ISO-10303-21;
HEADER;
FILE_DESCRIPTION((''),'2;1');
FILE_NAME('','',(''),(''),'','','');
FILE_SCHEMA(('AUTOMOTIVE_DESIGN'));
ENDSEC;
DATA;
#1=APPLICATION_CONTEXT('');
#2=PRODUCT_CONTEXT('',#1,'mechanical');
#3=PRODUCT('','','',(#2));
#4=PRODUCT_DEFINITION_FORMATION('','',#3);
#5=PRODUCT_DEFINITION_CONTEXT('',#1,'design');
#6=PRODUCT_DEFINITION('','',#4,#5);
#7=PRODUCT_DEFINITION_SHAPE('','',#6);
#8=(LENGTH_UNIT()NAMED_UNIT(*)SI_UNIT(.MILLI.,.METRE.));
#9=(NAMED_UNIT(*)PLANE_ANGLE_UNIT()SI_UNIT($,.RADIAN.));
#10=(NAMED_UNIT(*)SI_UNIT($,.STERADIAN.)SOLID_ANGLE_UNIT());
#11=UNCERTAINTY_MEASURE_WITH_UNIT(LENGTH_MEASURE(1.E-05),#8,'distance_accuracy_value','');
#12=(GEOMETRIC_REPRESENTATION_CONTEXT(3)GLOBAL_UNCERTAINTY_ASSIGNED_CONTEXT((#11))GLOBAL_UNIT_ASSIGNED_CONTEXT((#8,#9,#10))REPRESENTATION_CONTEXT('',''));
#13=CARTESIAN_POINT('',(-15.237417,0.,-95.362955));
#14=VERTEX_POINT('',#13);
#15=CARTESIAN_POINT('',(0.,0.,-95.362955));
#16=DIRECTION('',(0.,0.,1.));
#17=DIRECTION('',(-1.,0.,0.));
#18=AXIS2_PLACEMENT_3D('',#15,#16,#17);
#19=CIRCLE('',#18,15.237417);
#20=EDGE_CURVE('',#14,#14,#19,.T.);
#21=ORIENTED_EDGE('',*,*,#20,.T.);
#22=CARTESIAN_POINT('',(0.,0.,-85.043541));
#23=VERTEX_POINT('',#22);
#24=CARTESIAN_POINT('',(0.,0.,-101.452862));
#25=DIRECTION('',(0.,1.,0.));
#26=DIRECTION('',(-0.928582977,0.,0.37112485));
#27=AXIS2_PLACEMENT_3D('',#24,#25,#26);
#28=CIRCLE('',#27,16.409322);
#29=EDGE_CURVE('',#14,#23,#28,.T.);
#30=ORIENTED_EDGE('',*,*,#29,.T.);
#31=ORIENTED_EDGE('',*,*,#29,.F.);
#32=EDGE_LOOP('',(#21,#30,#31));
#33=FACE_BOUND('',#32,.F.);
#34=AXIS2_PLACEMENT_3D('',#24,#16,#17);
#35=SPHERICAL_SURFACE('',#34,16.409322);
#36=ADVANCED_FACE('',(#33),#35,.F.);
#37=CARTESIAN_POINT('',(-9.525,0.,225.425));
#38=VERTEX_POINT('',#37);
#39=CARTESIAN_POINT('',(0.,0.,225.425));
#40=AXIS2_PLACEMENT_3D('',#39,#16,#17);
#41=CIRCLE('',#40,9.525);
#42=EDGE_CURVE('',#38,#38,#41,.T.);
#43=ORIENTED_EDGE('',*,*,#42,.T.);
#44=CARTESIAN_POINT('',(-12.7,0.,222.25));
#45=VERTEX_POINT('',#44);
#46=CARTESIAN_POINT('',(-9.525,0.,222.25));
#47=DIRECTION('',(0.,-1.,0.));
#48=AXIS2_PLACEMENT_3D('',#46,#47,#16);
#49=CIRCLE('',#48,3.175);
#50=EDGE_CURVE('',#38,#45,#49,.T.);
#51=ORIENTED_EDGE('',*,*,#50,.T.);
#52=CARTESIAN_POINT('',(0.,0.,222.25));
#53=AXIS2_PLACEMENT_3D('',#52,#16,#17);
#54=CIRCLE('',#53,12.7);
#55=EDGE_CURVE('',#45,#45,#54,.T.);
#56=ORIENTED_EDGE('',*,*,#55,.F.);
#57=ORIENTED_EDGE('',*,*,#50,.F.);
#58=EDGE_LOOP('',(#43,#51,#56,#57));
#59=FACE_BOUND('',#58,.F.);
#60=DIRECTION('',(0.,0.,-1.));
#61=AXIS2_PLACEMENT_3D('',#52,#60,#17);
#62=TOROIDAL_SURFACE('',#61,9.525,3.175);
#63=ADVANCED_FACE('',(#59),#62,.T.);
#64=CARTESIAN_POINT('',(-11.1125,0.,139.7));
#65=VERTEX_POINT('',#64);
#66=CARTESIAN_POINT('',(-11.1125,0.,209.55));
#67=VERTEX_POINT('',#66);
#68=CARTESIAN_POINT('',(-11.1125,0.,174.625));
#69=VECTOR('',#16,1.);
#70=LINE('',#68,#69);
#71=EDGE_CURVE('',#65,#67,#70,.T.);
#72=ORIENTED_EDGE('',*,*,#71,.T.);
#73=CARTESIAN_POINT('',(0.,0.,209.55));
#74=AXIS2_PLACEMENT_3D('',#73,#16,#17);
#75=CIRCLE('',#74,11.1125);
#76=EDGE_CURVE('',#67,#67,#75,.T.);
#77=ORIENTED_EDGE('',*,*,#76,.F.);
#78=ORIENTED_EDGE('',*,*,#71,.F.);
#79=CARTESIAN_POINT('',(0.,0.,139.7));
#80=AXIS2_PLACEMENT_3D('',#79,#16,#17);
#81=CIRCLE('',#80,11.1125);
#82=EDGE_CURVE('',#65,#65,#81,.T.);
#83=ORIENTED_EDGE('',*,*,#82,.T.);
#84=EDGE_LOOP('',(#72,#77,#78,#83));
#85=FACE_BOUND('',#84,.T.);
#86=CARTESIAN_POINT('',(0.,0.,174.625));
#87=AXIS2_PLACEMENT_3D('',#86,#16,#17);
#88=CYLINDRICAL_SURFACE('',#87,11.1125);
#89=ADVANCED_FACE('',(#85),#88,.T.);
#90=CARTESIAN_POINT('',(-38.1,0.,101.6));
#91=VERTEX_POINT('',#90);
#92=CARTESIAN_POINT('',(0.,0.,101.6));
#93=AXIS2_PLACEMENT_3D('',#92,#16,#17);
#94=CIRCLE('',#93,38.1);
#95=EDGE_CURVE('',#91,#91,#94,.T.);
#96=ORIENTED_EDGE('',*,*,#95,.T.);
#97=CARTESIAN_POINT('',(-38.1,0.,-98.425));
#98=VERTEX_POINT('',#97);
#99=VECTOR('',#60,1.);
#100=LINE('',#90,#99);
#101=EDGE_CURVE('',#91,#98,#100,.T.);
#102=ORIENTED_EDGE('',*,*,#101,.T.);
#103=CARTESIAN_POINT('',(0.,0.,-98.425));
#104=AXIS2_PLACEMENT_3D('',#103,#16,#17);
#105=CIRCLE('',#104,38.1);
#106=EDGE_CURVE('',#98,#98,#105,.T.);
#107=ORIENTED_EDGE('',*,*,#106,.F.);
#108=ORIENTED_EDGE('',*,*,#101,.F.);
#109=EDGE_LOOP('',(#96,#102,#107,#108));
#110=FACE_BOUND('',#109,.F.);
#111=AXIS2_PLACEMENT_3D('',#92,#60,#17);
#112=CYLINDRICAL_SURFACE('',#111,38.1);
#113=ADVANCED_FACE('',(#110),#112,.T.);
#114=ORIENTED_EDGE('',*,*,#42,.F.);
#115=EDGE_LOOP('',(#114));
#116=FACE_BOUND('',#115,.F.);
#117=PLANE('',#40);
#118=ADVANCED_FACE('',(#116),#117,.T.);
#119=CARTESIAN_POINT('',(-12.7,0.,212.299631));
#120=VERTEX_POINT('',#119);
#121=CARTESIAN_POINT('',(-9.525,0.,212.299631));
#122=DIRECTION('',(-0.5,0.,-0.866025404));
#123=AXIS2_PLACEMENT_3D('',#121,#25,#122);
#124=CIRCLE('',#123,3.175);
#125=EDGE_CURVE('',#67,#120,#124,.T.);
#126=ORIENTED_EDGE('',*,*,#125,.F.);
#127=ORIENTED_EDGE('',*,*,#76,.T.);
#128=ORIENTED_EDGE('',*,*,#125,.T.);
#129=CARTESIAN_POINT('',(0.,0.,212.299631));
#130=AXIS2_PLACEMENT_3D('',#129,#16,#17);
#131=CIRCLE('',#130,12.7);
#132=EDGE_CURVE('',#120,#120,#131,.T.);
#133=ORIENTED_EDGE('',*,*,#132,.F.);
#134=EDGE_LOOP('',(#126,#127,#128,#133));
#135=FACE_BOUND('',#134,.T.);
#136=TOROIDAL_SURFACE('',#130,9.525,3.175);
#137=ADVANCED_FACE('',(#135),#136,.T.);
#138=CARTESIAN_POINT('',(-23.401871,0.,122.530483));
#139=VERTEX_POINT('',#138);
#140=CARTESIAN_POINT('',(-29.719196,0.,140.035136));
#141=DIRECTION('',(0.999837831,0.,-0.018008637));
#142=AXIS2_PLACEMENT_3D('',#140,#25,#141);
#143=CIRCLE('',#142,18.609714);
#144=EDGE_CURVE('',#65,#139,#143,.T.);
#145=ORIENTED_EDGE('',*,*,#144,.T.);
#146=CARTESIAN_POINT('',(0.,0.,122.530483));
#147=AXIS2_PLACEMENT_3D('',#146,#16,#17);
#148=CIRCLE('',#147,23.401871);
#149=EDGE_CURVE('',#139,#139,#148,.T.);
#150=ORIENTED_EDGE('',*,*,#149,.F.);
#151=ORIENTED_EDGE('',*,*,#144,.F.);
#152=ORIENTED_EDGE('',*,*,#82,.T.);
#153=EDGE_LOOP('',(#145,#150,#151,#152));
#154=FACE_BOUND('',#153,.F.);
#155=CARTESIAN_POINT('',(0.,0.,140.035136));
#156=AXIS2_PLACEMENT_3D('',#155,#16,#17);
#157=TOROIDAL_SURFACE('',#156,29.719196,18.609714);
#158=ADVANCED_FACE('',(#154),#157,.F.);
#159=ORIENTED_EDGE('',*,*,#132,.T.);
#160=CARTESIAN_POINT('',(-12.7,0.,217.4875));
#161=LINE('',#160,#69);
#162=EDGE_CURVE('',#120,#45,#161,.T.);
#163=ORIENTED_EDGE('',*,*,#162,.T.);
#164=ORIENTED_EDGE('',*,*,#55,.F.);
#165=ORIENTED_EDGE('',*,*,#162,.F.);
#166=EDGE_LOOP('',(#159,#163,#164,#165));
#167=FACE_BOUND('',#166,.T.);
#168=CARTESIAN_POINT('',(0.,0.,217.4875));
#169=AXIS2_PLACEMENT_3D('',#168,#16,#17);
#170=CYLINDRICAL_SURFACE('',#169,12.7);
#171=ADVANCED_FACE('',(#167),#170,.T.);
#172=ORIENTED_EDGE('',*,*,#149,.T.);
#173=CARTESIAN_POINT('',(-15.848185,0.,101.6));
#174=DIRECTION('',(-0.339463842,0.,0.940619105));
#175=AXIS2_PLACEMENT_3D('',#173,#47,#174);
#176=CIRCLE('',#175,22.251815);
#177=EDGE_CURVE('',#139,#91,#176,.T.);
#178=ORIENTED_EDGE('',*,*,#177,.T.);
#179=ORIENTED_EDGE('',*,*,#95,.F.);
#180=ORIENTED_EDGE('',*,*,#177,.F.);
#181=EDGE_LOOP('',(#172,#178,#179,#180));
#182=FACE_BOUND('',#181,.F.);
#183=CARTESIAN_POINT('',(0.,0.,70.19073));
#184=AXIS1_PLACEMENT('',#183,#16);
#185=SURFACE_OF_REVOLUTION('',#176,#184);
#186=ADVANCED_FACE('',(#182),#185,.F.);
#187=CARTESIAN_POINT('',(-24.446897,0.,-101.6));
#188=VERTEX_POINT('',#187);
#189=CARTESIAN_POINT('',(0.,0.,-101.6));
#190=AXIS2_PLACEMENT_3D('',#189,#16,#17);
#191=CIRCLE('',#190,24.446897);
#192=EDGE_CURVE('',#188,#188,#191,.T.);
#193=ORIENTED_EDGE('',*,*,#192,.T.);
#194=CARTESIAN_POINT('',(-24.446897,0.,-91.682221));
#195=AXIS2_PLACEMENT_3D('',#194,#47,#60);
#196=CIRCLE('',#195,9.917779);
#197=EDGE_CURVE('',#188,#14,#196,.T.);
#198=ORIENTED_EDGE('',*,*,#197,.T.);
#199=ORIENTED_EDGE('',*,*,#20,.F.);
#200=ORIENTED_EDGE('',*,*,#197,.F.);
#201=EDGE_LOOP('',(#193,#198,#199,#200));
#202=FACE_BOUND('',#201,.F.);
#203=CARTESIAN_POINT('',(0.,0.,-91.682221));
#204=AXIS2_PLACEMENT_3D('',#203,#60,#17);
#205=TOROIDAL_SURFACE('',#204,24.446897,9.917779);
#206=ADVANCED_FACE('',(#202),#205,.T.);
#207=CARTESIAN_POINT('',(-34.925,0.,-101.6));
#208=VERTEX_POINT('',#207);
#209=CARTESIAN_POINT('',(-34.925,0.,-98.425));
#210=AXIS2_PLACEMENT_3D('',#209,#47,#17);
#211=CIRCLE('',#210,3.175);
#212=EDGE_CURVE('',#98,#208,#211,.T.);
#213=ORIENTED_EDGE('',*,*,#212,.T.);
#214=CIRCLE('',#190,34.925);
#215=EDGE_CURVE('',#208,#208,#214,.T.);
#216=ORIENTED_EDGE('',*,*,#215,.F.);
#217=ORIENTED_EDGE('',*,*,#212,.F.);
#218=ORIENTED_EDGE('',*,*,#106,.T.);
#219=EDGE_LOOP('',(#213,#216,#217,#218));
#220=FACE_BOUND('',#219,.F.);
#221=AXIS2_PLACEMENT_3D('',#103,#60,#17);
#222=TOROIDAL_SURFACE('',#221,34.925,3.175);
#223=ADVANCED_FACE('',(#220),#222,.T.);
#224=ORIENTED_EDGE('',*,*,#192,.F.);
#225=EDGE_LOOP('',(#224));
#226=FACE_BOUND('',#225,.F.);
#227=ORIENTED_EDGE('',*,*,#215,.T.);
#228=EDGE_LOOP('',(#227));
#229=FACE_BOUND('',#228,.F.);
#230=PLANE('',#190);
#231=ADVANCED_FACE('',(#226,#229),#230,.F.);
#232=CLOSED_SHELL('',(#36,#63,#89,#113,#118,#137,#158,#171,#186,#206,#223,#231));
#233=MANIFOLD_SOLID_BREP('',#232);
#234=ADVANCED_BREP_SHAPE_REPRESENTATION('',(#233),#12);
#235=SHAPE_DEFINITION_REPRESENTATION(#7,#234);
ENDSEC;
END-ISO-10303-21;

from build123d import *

# Parameters (mm, degrees)
F0_W   = 1.5875
F0_H   = 15.875
F0_W_2 = 11.1125
F0_H_2 = 69.85


# Not quite as in the source:
# - a fillet or chamfer that OpenCascade refuses, or shapes differently, is made with other operations: its cross-section is extruded or revolved along the edge and cut away or added


with BuildPart() as f1:
    # F0 (on Front) → F1 (revolve)
    with BuildSketch(Plane.XZ):
        with Locations((-11.90625, 217.4875)):
            Rectangle(F0_W, F0_H)
        with Locations((-5.55625, 217.4875)):
            Rectangle(F0_W_2, F0_H)
        with Locations((-5.55625, 174.625)):
            Rectangle(F0_W_2, F0_H_2)
        with BuildLine():
            Line((-38.1, 101.6), (0, 101.6))
            Line((0, 101.6), (0, 139.7))
            Line((0, 139.7), (-11.1125, 139.7))
            ThreePointArc((-11.1125, 139.7), (-14.586457312, 129.203622534), (-23.4018713236, 122.5304827094))
            ThreePointArc((-23.4018713236, 122.5304827094), (-34.0584362623, 114.387885801), (-38.1, 101.6))
        make_face()
        with BuildLine():
            Line((0, -85.043540958), (0, 101.6))
            Line((0, 101.6), (-38.1, 101.6))
            Line((-38.1, 101.6), (-38.1, -101.6))
            Line((-38.1, -101.6), (-24.4468970238, -101.6))
            ThreePointArc((-24.4468970238, -101.6), (-18.8855290947, -99.8940128678), (-15.2374166451, -95.3629554974))
            ThreePointArc((-15.2374166451, -95.3629554974), (-9.2014833377, -87.8661580499), (0, -85.043540958))
        make_face()
    revolve(axis=Axis((0, 0, 70.190729521), (0, 0, 1)))

    # F2: fillet of radius 3.175 on 3 edges, made by hand

    # F2_s1 → F2_t2 (revolve, cut)
    with BuildSketch(Plane.XZ):
        with BuildLine():
            ThreePointArc((-38.1, -98.425), (-37.1700640303, -100.6700640303), (-34.925, -101.6))
            Line((-34.925, -101.6), (-34.925, -101.6635))
            Line((-34.925, -101.6635), (-38.1635, -101.6635))
            Line((-38.1635, -101.6635), (-38.1635, -98.425))
            Line((-38.1635, -98.425), (-38.1, -98.425))
        make_face()
    revolve(axis=Axis((0, 0, -101.6), (0, 0, 1)), mode=Mode.SUBTRACT)

    # F2_s3 → F2_t4 (revolve, cut)
    with BuildSketch(Plane.XZ):
        with BuildLine():
            ThreePointArc((-9.525, 225.425), (-11.7700640303, 224.4950640303), (-12.7, 222.25))
            Line((-12.7, 222.25), (-12.7635, 222.25))
            Line((-12.7635, 222.25), (-12.7635, 225.4885))
            Line((-12.7635, 225.4885), (-9.525, 225.4885))
            Line((-9.525, 225.4885), (-9.525, 225.425))
        make_face()
    revolve(axis=Axis((0, 0, 225.425), (0, 0, 1)), mode=Mode.SUBTRACT)

    # F2_s5 → F2_t6 (revolve, cut)
    with BuildSketch(Plane.XZ):
        with BuildLine():
            ThreePointArc((-11.1125, 209.55), (-12.274630657, 210.712130657), (-12.7, 212.299630657))
            Line((-12.7, 212.299630657), (-12.7635, 212.299630657))
            Line((-12.7635, 212.299630657), (-12.7635, 209.55))
            Line((-12.7635, 209.55), (-12.7, 209.4865))
            ThreePointArc((-12.7, 209.4865), (-11.90625, 209.4865), (-11.14425, 209.4950073869))
            Line((-11.14425, 209.4950073869), (-11.1125, 209.55))
        make_face()
    revolve(axis=Axis((0, 0, 209.55), (0, 0, 1)), mode=Mode.SUBTRACT)


solid = f1.part
